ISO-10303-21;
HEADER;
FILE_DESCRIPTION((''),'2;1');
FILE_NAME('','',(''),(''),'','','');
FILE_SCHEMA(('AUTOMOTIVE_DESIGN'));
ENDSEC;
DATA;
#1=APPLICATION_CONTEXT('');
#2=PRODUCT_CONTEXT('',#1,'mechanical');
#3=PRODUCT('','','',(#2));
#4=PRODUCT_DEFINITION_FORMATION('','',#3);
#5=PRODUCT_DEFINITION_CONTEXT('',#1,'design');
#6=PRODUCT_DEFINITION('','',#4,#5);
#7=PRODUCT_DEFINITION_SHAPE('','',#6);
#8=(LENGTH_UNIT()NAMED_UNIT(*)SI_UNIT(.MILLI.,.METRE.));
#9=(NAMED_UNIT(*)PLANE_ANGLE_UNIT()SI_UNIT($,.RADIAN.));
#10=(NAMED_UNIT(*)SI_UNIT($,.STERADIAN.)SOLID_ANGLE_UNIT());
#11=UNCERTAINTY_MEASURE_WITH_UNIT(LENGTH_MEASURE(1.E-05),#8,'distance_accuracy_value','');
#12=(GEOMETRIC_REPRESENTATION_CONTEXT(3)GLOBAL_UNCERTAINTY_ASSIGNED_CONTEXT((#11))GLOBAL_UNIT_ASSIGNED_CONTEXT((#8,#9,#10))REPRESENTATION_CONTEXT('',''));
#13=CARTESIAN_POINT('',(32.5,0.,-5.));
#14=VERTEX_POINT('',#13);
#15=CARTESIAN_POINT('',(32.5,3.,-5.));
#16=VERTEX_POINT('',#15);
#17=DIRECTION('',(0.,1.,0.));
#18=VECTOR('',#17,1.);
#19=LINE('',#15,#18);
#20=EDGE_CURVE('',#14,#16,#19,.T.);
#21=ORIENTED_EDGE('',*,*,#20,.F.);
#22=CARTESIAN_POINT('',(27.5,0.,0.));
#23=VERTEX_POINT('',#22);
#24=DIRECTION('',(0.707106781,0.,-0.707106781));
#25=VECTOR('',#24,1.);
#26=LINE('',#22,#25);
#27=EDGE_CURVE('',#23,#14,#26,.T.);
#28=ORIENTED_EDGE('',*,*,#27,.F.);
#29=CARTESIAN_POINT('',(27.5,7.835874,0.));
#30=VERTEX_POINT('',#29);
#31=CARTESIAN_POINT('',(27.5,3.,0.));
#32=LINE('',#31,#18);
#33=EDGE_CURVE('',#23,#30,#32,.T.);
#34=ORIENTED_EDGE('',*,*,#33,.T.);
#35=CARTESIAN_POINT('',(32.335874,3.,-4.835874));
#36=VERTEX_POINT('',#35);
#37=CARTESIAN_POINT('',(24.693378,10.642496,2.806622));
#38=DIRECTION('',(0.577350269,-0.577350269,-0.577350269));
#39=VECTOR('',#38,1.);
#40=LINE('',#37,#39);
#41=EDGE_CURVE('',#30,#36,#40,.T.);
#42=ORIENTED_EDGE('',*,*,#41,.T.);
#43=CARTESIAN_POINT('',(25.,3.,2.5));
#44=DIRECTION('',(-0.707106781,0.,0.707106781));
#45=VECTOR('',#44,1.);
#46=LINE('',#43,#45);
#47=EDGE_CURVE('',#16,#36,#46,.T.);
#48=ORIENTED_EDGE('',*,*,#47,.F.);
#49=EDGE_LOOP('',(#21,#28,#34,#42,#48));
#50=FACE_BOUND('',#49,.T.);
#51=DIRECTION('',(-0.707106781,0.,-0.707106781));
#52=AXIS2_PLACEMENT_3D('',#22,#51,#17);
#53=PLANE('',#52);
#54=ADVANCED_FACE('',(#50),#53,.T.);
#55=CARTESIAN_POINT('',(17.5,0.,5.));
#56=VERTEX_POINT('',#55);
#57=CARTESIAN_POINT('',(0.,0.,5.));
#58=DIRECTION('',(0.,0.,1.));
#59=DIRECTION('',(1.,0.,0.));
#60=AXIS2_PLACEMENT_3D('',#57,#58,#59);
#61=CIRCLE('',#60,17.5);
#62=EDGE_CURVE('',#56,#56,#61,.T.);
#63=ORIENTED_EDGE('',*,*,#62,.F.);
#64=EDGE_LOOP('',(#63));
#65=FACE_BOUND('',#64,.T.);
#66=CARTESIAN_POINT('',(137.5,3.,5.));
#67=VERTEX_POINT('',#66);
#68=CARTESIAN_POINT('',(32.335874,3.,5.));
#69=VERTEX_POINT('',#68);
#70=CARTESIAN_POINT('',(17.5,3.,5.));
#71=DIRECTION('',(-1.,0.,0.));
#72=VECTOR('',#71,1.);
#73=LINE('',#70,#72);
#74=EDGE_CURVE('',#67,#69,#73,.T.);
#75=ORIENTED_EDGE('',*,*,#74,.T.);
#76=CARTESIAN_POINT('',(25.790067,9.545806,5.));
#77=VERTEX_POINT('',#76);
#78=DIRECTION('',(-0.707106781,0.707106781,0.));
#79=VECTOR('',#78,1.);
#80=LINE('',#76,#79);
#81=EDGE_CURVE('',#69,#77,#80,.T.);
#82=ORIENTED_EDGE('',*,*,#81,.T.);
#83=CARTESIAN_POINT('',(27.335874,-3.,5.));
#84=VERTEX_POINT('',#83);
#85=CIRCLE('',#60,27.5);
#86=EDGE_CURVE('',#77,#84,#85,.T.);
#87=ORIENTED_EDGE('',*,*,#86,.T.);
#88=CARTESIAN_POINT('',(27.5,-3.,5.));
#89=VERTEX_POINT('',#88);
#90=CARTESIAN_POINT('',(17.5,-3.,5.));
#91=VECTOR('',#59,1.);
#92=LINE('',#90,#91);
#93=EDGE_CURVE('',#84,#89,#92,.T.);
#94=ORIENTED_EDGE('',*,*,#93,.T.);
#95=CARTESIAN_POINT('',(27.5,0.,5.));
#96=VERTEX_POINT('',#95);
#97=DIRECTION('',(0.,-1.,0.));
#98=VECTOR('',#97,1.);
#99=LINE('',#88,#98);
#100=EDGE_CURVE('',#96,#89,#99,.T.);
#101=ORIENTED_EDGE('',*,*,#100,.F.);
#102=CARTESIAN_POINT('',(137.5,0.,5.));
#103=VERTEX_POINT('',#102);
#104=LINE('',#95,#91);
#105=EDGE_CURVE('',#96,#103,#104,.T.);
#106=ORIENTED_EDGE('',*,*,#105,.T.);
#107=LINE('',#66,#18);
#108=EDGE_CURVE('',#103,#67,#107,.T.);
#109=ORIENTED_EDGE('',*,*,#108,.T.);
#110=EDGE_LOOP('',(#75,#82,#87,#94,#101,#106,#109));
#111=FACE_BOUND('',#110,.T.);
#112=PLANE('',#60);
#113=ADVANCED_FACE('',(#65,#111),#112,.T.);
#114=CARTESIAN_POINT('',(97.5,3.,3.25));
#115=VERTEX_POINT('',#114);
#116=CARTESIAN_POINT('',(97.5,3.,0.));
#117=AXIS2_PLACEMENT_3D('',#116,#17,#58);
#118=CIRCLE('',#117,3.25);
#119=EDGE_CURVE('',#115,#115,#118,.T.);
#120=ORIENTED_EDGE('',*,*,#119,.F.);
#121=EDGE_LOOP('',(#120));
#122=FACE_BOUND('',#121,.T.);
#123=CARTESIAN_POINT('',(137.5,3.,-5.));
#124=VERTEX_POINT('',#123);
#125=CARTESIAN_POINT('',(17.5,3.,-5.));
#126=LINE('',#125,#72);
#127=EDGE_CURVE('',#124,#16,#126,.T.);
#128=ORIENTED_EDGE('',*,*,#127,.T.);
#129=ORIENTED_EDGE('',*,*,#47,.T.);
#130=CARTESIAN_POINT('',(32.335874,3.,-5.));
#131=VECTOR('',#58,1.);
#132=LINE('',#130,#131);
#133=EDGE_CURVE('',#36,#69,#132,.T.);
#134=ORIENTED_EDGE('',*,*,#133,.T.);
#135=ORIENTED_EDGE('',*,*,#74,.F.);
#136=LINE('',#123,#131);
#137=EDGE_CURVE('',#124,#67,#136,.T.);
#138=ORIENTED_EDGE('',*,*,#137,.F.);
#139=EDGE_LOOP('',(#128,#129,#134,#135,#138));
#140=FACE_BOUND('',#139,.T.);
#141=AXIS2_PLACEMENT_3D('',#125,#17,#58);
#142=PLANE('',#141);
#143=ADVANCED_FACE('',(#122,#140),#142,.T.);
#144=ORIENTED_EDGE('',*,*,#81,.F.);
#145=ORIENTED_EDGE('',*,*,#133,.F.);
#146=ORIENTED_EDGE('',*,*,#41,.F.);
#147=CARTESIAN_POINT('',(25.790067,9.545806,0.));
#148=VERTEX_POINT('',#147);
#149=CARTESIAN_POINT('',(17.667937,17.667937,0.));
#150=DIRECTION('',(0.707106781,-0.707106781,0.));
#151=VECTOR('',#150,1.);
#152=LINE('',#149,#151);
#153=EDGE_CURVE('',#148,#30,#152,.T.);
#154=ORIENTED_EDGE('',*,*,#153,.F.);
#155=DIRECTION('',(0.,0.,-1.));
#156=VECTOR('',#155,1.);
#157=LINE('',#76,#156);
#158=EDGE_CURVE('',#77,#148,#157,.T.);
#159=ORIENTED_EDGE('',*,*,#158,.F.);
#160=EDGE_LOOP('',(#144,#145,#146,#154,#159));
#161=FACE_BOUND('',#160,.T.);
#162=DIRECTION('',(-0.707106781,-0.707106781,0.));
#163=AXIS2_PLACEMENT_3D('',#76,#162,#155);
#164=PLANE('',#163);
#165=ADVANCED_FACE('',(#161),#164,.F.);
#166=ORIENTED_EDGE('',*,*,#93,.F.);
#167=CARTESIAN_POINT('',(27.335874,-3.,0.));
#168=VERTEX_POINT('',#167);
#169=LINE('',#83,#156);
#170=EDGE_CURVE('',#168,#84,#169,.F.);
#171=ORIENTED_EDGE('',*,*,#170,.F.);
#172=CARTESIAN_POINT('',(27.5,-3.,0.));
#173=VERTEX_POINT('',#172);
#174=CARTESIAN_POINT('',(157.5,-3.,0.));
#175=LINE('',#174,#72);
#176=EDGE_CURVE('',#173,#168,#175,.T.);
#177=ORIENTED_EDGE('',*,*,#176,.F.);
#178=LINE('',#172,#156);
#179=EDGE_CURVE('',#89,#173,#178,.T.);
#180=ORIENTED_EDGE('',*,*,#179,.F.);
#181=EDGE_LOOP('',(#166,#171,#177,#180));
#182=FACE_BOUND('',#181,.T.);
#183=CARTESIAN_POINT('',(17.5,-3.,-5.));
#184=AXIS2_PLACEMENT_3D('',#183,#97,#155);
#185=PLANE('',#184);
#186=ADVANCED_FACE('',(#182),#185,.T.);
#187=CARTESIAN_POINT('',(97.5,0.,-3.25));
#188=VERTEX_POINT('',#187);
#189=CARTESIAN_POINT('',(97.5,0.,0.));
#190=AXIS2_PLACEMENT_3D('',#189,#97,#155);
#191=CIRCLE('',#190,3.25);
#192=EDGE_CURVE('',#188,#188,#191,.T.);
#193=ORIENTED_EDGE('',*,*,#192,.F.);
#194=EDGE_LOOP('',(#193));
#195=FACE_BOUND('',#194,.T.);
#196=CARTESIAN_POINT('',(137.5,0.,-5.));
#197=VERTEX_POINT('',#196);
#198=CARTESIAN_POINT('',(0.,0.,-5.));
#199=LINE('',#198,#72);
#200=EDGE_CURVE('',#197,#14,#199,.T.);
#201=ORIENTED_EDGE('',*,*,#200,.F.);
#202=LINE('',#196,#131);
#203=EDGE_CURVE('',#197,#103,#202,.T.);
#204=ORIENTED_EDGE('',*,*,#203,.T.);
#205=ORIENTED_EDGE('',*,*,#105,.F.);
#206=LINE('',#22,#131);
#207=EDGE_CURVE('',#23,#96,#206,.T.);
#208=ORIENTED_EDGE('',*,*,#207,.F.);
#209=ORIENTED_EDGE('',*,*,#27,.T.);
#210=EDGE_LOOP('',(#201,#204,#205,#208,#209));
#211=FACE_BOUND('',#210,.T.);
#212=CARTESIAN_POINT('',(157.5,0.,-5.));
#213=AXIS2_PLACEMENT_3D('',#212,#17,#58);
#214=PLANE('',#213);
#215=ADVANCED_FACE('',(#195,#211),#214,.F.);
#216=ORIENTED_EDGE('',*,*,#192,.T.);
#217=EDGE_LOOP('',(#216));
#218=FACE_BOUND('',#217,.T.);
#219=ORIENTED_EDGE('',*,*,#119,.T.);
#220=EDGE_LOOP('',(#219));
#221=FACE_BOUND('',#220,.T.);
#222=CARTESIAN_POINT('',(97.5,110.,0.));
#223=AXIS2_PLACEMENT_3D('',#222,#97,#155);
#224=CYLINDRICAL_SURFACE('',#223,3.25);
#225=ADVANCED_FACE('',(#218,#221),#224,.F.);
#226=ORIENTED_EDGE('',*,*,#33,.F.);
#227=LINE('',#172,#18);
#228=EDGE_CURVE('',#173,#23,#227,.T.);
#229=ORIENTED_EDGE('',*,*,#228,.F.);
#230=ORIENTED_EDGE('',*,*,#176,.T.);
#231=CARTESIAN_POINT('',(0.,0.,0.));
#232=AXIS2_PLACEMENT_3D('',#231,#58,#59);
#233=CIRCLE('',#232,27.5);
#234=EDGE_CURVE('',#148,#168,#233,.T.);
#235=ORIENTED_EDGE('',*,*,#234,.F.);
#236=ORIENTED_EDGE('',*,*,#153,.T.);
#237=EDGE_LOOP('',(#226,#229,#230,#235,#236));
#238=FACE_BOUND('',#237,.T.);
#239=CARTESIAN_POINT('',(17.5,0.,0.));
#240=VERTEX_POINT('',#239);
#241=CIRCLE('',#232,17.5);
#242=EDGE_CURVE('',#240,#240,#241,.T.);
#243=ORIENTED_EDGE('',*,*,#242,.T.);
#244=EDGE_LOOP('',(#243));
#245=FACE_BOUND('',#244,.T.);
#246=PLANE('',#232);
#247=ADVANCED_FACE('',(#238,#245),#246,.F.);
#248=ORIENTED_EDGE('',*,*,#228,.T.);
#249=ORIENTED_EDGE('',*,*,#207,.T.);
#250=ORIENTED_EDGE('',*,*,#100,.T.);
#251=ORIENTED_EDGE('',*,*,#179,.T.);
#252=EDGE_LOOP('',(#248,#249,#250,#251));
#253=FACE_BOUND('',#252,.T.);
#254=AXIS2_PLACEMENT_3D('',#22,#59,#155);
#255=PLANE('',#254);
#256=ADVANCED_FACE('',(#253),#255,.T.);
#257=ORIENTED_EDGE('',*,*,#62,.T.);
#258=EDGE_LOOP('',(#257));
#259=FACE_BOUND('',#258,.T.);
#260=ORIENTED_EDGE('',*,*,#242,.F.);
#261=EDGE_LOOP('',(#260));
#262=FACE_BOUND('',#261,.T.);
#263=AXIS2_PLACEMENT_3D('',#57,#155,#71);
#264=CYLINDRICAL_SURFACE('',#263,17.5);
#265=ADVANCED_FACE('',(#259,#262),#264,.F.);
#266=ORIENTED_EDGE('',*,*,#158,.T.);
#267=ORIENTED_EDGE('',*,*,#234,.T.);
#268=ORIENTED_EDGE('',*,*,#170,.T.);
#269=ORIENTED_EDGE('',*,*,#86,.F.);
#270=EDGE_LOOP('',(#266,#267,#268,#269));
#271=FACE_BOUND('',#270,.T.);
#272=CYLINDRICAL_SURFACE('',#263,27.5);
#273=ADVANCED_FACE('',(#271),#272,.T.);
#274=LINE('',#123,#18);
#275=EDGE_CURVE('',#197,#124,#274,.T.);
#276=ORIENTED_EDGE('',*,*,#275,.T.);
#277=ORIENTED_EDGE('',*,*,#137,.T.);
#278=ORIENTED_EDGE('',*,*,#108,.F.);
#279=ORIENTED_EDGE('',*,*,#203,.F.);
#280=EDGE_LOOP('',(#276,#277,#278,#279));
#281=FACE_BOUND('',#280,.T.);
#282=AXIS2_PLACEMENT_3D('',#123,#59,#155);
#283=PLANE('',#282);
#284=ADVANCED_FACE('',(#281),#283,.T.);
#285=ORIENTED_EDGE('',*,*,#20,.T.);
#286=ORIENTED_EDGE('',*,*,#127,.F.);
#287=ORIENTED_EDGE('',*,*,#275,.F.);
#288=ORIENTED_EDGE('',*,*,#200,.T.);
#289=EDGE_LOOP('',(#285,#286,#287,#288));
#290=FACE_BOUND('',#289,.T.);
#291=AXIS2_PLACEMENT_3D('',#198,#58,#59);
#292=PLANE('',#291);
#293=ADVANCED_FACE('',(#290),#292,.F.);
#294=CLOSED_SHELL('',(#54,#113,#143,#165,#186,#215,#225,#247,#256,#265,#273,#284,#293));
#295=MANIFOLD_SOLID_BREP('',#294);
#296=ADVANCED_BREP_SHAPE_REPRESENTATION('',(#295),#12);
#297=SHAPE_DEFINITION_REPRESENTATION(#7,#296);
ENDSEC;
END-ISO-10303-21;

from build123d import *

# Parameters (mm, degrees)
SKETCH1_R           = 27.5
SKETCH1_R_2         = 17.5
BOSS_EXTRUDE1_DEPTH = 5
SKETCH2_W           = 120
SKETCH2_H           = 6
BOSS_EXTRUDE2_DEPTH = 10
SKETCH3_W           = 5
SKETCH3_H           = 3
CUT_EXTRUDE2_DEPTH  = 140
SKETCH4_W           = 5
SKETCH4_H           = 3
CUT_EXTRUDE3_DEPTH  = 10
CHAMFER2_SIZE       = 5
SKETCH5_W           = 5
SKETCH5_H           = 3
CUT_EXTRUDE4_DEPTH  = 110
CHAMFER3_SIZE       = 5
SKETCH6_R           = 3.25
CUT_EXTRUDE5_DEPTH  = 110


# Some blends are built 0.0001 mm under size
with BuildPart() as part:
    # Sketch1 → Boss-Extrude1 (new body)
    with BuildSketch(Plane.XY):
        Circle(SKETCH1_R)
        Circle(SKETCH1_R_2, mode=Mode.SUBTRACT)
    extrude(amount=BOSS_EXTRUDE1_DEPTH)

    # Sketch2 → Boss-Extrude2 (add)
    with BuildSketch(Plane.XY.offset(5)):
        with Locations((77.5, 0)):
            Rectangle(SKETCH2_W, SKETCH2_H)
    extrude(amount=-BOSS_EXTRUDE2_DEPTH)

    # Sketch3 → Cut-Extrude2 (cut)
    with BuildSketch(Plane.ZY.offset(-17.5)):
        with Locations((-2.5, -1.5)):
            Rectangle(SKETCH3_W, SKETCH3_H)
    extrude(amount=-CUT_EXTRUDE2_DEPTH, mode=Mode.SUBTRACT)

    # Sketch4 → Cut-Extrude3 (cut)
    with BuildSketch(Plane.ZY.offset(-17.5)):
        with Locations((-2.5, 1.5)):
            Rectangle(SKETCH4_W, SKETCH4_H)
    extrude(amount=-CUT_EXTRUDE3_DEPTH, mode=Mode.SUBTRACT)

    # Chamfer2
    chamfer2_edges = [part.edges().sort_by_distance(p)[0] for p in [
        (27.5, 1.5, -5),
    ]]
    chamfer(chamfer2_edges, length=CHAMFER2_SIZE - 0.0001)  # a hair under: the kernel refuses the full size

    # Sketch5 → Cut-Extrude4 (cut)
    with BuildSketch(Plane(origin=(137.5, 0, 0), x_dir=(0, 0, -1), z_dir=(1, 0, 0))):
        with Locations((-2.5, -1.5)):
            Rectangle(SKETCH5_W, SKETCH5_H)
    extrude(amount=-CUT_EXTRUDE4_DEPTH, mode=Mode.SUBTRACT)

    # Chamfer3
    # the kernel refuses this chamfer: 5.650095031, 5 mm, written as the material it adds along each edge
    with BuildSketch(Plane(origin=(27.335873866, 3, 5), x_dir=(1, 0, 0), z_dir=(0, 0, -1))) as chamfer3_piece_1_section:
        with BuildLine():
            Line((CHAMFER3_SIZE, 0), (-1.545806391, -6.545806391))
            ThreePointArc((-1.545806391, -6.545806391), (-0.594506403, -3.414769383), (0, 0))
            Line((0, 0), (CHAMFER3_SIZE, 0))
        make_face()
    chamfer3_piece_1 = extrude(amount=5, mode=Mode.PRIVATE)
    chamfer3_piece_1 = split(chamfer3_piece_1, bisect_by=Plane(origin=(27.5, 3, 5), z_dir=(1, 0, 0)), keep=Keep.TOP, mode=Mode.PRIVATE)
    add(chamfer3_piece_1)
    with BuildSketch(Plane(origin=(27.335873866, 3, 5), x_dir=(1, 0, 0), z_dir=(0, 0, -1))) as chamfer3_piece_2_section:
        with BuildLine():
            Line((CHAMFER3_SIZE, 0), (-1.545806391, -6.545806391))
            ThreePointArc((-1.545806391, -6.545806391), (-0.594506403, -3.414769383), (0, 0))
            Line((0, 0), (CHAMFER3_SIZE, 0))
        make_face()
    chamfer3_piece_2 = extrude(amount=5, mode=Mode.PRIVATE)
    chamfer3_piece_2 = split(chamfer3_piece_2, bisect_by=Plane(origin=(24.917886933, 3, 2.582013067), z_dir=(0.7071067811865478, 0, 0.7071067811865472)), keep=Keep.TOP, mode=Mode.PRIVATE)
    chamfer3_piece_2 = split(chamfer3_piece_2, bisect_by=Plane(origin=(27.5, 3, 5), z_dir=(-1, 0, 0)), keep=Keep.TOP, mode=Mode.PRIVATE)
    add(chamfer3_piece_2)
    with BuildSketch(Plane(origin=(27.335873866, 3, 5), x_dir=(1, 0, 0), z_dir=(0, 0, -1))) as chamfer3_piece_3_section:
        with BuildLine():
            Line((CHAMFER3_SIZE, 0), (-1.545806391, -6.545806391))
            ThreePointArc((-1.545806391, -6.545806391), (-0.594506403, -3.414769383), (0, 0))
            Line((0, 0), (CHAMFER3_SIZE, 0))
        make_face()
    chamfer3_piece_3 = extrude(amount=22.297831984, mode=Mode.PRIVATE)
    chamfer3_piece_3 = split(chamfer3_piece_3, bisect_by=Plane(origin=(24.917886933, 3, 2.582013067), z_dir=(0.7071067811865478, 0, 0.7071067811865472)), keep=Keep.TOP, mode=Mode.PRIVATE)
    chamfer3_piece_3 = split(chamfer3_piece_3, bisect_by=Plane(origin=(27.335873866, 3, 0), z_dir=(0, 0, -1)), keep=Keep.TOP, mode=Mode.PRIVATE)
    add(chamfer3_piece_3)
    with BuildSketch(Plane(origin=(27.335873866, 3, 5), x_dir=(1, 0, 0), z_dir=(0, 0, -1))) as chamfer3_piece_4_section:
        with BuildLine():
            Line((CHAMFER3_SIZE, 0), (-1.545806391, -6.545806391))
            ThreePointArc((-1.545806391, -6.545806391), (-0.594506403, -3.414769383), (0, 0))
            Line((0, 0), (CHAMFER3_SIZE, 0))
        make_face()
    chamfer3_piece_4 = extrude(amount=5, mode=Mode.PRIVATE)
    chamfer3_piece_4 = split(chamfer3_piece_4, bisect_by=Plane(origin=(24.917886933, 3, 2.582013067), z_dir=(-0.7071067811865478, 0, -0.7071067811865472)), keep=Keep.TOP, mode=Mode.PRIVATE)
    add(chamfer3_piece_4)

    # Sketch6 → Cut-Extrude5 (cut)
    with BuildSketch(Plane.XZ):
        with Locations(Location((97.5, 0, 0), (0, 0, 270))):
            Circle(SKETCH6_R)
    extrude(amount=-CUT_EXTRUDE5_DEPTH, mode=Mode.SUBTRACT)


solid = part.part
